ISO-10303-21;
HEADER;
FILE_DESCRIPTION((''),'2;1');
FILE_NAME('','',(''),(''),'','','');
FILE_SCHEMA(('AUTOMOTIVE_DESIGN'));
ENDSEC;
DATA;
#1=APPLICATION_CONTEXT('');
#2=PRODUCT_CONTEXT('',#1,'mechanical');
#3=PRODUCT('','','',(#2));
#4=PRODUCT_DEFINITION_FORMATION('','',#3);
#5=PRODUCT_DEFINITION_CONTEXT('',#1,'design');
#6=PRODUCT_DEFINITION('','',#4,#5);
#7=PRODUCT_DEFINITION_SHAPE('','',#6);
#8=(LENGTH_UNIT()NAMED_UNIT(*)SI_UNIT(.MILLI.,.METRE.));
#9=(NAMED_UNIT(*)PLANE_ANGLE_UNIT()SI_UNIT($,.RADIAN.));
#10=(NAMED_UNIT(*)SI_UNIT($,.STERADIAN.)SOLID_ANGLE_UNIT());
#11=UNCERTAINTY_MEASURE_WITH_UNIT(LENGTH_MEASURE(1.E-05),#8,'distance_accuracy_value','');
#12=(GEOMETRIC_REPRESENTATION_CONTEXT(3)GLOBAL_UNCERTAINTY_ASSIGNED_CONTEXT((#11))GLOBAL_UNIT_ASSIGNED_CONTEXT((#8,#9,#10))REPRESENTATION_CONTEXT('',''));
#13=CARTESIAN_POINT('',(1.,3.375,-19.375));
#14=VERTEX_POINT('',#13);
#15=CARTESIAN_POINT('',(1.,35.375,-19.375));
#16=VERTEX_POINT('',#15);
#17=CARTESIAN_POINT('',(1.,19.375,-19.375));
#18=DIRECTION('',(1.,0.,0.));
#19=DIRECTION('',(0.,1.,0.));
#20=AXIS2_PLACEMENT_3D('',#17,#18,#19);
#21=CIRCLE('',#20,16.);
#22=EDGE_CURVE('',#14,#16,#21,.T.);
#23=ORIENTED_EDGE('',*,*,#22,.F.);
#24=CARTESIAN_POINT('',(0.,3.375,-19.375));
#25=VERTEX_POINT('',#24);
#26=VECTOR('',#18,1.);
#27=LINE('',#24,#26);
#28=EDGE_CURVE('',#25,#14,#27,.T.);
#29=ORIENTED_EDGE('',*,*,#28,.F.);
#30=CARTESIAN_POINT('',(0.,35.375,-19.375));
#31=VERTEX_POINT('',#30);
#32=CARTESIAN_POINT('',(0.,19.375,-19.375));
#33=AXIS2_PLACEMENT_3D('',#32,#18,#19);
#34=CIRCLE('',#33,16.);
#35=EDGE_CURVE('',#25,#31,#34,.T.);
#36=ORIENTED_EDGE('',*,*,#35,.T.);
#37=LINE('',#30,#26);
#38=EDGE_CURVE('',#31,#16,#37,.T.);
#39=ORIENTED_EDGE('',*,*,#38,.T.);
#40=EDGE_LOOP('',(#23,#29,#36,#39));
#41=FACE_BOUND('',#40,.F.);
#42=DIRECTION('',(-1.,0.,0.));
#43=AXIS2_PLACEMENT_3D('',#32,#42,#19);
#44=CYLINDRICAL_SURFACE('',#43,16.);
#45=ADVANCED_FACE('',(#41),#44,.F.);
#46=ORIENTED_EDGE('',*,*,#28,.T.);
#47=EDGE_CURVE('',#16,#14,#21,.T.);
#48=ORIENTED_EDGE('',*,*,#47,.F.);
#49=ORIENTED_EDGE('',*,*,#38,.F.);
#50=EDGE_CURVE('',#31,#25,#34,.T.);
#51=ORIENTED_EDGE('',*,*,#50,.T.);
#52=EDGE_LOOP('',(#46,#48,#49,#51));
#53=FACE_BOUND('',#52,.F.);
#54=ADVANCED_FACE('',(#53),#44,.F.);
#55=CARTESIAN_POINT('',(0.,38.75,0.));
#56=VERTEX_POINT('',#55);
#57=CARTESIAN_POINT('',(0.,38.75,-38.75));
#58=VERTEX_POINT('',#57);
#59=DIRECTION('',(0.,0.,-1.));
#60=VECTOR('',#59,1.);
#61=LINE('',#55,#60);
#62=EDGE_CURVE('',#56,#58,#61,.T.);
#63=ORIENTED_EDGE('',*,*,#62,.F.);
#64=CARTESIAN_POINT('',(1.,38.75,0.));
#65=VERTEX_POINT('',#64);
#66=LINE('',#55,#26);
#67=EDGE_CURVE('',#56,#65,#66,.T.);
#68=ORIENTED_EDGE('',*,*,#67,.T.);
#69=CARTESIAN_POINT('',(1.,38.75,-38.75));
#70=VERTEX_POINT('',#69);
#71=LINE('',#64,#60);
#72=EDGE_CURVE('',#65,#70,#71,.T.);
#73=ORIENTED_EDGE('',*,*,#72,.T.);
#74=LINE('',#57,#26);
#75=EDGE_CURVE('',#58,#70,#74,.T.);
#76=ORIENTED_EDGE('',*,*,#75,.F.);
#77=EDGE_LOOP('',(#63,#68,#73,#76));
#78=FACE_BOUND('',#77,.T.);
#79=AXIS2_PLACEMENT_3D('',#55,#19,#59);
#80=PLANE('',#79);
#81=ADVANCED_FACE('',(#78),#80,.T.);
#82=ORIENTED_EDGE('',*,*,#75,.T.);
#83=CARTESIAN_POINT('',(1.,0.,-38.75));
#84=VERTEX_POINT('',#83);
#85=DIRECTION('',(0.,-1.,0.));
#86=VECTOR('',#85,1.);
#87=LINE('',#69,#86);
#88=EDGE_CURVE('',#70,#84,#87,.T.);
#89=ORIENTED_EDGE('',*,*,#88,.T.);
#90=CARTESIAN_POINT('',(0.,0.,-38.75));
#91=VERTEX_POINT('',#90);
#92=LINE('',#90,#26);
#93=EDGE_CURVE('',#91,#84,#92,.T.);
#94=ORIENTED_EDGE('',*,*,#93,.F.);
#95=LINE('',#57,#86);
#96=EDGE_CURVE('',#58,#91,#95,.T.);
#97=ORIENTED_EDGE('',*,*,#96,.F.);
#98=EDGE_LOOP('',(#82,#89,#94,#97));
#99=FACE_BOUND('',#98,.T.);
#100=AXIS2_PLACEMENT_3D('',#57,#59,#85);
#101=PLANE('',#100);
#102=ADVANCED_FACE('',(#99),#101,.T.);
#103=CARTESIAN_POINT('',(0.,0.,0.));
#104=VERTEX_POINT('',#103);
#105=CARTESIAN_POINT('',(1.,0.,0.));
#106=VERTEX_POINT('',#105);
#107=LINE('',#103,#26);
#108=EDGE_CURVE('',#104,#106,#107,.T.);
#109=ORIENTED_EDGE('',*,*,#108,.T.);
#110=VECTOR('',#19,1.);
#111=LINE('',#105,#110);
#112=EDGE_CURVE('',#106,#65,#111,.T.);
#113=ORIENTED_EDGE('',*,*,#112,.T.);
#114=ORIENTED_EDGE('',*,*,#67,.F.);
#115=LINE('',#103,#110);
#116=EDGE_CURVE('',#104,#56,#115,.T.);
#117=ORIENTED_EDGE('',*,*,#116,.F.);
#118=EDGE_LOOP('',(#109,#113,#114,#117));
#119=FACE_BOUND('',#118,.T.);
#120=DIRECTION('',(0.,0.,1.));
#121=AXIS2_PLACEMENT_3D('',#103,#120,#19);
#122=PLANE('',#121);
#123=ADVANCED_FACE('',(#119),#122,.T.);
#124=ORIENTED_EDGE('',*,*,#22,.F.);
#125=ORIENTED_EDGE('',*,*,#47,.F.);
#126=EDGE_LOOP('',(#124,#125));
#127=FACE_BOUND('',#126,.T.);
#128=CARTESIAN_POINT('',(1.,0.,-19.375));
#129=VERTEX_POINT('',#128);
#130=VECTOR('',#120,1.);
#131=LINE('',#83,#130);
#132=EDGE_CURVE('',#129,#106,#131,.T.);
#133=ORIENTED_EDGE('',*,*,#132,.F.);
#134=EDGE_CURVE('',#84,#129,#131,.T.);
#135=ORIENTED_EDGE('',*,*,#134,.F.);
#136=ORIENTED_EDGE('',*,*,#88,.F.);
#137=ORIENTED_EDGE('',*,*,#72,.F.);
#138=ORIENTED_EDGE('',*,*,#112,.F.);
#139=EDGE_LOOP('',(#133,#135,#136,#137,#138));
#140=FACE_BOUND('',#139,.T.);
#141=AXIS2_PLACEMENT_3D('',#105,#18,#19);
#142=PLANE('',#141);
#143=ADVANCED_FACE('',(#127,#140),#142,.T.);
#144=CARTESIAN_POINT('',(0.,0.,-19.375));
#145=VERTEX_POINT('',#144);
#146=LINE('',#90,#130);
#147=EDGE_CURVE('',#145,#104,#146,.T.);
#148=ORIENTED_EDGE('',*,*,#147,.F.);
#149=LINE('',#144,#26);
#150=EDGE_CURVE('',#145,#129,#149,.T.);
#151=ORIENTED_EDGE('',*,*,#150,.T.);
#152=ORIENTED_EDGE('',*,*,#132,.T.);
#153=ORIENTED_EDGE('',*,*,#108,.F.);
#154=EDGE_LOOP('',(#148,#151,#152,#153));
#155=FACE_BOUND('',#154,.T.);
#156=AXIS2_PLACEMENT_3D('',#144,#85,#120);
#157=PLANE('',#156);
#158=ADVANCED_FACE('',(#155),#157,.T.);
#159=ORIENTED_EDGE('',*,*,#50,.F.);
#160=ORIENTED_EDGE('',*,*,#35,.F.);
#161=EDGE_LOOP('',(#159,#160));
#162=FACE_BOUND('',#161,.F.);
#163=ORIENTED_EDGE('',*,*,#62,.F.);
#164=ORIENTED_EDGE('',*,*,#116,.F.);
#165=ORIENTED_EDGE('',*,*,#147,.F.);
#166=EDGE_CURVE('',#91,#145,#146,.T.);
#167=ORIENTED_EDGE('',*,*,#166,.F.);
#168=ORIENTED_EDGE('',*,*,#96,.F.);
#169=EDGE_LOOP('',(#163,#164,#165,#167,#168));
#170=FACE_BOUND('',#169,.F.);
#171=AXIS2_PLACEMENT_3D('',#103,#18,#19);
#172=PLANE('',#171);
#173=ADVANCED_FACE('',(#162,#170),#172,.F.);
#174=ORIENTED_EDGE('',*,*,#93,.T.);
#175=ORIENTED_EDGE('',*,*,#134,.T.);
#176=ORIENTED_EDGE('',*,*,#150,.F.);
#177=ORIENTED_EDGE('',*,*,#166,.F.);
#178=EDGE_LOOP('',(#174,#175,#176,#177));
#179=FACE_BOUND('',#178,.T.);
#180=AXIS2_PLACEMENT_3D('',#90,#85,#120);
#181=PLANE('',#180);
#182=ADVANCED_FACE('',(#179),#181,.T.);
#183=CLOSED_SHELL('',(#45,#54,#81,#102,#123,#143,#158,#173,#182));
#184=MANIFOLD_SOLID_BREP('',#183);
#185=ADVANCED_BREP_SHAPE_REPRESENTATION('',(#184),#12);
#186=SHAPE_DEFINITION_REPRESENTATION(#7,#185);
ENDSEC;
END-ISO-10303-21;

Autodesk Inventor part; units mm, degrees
ref_plane "YZ Plane" through (0, 0, 0) normal (1, 0, 0) x (0, 1, 0)
ref_plane "XZ Plane" through (0, 0, 0) normal (0, 1, 0) x (-1, 0, 0)
ref_plane "XY Plane" through (0, 0, 0) normal (0, 0, 1) x (1, 0, 0)
sketch "Sketch1" plane through (0, 0, 0) normal (1, 0, 0) x (0, 1, 0)
  line L0 (0, 0) -> (38.75, 0)
  line L1 (38.75, 0) -> (38.75, -38.75)
  line L2 (38.75, -38.75) -> (0, -38.75)
  line L3 (0, -38.75) -> (0, 0)
  line L4 (0, -19.375) -> (19.375, -19.375)
  circle A0 centre (19.375, -19.375) radius 16
  dimension "d0" = 38.75
  dimension "d1" = 38.75
  dimension "d2" = 32
extrude "Extrusion1" add sketch "Sketch1" along normal blind 1
properties part number "Mag_Shield_front"
